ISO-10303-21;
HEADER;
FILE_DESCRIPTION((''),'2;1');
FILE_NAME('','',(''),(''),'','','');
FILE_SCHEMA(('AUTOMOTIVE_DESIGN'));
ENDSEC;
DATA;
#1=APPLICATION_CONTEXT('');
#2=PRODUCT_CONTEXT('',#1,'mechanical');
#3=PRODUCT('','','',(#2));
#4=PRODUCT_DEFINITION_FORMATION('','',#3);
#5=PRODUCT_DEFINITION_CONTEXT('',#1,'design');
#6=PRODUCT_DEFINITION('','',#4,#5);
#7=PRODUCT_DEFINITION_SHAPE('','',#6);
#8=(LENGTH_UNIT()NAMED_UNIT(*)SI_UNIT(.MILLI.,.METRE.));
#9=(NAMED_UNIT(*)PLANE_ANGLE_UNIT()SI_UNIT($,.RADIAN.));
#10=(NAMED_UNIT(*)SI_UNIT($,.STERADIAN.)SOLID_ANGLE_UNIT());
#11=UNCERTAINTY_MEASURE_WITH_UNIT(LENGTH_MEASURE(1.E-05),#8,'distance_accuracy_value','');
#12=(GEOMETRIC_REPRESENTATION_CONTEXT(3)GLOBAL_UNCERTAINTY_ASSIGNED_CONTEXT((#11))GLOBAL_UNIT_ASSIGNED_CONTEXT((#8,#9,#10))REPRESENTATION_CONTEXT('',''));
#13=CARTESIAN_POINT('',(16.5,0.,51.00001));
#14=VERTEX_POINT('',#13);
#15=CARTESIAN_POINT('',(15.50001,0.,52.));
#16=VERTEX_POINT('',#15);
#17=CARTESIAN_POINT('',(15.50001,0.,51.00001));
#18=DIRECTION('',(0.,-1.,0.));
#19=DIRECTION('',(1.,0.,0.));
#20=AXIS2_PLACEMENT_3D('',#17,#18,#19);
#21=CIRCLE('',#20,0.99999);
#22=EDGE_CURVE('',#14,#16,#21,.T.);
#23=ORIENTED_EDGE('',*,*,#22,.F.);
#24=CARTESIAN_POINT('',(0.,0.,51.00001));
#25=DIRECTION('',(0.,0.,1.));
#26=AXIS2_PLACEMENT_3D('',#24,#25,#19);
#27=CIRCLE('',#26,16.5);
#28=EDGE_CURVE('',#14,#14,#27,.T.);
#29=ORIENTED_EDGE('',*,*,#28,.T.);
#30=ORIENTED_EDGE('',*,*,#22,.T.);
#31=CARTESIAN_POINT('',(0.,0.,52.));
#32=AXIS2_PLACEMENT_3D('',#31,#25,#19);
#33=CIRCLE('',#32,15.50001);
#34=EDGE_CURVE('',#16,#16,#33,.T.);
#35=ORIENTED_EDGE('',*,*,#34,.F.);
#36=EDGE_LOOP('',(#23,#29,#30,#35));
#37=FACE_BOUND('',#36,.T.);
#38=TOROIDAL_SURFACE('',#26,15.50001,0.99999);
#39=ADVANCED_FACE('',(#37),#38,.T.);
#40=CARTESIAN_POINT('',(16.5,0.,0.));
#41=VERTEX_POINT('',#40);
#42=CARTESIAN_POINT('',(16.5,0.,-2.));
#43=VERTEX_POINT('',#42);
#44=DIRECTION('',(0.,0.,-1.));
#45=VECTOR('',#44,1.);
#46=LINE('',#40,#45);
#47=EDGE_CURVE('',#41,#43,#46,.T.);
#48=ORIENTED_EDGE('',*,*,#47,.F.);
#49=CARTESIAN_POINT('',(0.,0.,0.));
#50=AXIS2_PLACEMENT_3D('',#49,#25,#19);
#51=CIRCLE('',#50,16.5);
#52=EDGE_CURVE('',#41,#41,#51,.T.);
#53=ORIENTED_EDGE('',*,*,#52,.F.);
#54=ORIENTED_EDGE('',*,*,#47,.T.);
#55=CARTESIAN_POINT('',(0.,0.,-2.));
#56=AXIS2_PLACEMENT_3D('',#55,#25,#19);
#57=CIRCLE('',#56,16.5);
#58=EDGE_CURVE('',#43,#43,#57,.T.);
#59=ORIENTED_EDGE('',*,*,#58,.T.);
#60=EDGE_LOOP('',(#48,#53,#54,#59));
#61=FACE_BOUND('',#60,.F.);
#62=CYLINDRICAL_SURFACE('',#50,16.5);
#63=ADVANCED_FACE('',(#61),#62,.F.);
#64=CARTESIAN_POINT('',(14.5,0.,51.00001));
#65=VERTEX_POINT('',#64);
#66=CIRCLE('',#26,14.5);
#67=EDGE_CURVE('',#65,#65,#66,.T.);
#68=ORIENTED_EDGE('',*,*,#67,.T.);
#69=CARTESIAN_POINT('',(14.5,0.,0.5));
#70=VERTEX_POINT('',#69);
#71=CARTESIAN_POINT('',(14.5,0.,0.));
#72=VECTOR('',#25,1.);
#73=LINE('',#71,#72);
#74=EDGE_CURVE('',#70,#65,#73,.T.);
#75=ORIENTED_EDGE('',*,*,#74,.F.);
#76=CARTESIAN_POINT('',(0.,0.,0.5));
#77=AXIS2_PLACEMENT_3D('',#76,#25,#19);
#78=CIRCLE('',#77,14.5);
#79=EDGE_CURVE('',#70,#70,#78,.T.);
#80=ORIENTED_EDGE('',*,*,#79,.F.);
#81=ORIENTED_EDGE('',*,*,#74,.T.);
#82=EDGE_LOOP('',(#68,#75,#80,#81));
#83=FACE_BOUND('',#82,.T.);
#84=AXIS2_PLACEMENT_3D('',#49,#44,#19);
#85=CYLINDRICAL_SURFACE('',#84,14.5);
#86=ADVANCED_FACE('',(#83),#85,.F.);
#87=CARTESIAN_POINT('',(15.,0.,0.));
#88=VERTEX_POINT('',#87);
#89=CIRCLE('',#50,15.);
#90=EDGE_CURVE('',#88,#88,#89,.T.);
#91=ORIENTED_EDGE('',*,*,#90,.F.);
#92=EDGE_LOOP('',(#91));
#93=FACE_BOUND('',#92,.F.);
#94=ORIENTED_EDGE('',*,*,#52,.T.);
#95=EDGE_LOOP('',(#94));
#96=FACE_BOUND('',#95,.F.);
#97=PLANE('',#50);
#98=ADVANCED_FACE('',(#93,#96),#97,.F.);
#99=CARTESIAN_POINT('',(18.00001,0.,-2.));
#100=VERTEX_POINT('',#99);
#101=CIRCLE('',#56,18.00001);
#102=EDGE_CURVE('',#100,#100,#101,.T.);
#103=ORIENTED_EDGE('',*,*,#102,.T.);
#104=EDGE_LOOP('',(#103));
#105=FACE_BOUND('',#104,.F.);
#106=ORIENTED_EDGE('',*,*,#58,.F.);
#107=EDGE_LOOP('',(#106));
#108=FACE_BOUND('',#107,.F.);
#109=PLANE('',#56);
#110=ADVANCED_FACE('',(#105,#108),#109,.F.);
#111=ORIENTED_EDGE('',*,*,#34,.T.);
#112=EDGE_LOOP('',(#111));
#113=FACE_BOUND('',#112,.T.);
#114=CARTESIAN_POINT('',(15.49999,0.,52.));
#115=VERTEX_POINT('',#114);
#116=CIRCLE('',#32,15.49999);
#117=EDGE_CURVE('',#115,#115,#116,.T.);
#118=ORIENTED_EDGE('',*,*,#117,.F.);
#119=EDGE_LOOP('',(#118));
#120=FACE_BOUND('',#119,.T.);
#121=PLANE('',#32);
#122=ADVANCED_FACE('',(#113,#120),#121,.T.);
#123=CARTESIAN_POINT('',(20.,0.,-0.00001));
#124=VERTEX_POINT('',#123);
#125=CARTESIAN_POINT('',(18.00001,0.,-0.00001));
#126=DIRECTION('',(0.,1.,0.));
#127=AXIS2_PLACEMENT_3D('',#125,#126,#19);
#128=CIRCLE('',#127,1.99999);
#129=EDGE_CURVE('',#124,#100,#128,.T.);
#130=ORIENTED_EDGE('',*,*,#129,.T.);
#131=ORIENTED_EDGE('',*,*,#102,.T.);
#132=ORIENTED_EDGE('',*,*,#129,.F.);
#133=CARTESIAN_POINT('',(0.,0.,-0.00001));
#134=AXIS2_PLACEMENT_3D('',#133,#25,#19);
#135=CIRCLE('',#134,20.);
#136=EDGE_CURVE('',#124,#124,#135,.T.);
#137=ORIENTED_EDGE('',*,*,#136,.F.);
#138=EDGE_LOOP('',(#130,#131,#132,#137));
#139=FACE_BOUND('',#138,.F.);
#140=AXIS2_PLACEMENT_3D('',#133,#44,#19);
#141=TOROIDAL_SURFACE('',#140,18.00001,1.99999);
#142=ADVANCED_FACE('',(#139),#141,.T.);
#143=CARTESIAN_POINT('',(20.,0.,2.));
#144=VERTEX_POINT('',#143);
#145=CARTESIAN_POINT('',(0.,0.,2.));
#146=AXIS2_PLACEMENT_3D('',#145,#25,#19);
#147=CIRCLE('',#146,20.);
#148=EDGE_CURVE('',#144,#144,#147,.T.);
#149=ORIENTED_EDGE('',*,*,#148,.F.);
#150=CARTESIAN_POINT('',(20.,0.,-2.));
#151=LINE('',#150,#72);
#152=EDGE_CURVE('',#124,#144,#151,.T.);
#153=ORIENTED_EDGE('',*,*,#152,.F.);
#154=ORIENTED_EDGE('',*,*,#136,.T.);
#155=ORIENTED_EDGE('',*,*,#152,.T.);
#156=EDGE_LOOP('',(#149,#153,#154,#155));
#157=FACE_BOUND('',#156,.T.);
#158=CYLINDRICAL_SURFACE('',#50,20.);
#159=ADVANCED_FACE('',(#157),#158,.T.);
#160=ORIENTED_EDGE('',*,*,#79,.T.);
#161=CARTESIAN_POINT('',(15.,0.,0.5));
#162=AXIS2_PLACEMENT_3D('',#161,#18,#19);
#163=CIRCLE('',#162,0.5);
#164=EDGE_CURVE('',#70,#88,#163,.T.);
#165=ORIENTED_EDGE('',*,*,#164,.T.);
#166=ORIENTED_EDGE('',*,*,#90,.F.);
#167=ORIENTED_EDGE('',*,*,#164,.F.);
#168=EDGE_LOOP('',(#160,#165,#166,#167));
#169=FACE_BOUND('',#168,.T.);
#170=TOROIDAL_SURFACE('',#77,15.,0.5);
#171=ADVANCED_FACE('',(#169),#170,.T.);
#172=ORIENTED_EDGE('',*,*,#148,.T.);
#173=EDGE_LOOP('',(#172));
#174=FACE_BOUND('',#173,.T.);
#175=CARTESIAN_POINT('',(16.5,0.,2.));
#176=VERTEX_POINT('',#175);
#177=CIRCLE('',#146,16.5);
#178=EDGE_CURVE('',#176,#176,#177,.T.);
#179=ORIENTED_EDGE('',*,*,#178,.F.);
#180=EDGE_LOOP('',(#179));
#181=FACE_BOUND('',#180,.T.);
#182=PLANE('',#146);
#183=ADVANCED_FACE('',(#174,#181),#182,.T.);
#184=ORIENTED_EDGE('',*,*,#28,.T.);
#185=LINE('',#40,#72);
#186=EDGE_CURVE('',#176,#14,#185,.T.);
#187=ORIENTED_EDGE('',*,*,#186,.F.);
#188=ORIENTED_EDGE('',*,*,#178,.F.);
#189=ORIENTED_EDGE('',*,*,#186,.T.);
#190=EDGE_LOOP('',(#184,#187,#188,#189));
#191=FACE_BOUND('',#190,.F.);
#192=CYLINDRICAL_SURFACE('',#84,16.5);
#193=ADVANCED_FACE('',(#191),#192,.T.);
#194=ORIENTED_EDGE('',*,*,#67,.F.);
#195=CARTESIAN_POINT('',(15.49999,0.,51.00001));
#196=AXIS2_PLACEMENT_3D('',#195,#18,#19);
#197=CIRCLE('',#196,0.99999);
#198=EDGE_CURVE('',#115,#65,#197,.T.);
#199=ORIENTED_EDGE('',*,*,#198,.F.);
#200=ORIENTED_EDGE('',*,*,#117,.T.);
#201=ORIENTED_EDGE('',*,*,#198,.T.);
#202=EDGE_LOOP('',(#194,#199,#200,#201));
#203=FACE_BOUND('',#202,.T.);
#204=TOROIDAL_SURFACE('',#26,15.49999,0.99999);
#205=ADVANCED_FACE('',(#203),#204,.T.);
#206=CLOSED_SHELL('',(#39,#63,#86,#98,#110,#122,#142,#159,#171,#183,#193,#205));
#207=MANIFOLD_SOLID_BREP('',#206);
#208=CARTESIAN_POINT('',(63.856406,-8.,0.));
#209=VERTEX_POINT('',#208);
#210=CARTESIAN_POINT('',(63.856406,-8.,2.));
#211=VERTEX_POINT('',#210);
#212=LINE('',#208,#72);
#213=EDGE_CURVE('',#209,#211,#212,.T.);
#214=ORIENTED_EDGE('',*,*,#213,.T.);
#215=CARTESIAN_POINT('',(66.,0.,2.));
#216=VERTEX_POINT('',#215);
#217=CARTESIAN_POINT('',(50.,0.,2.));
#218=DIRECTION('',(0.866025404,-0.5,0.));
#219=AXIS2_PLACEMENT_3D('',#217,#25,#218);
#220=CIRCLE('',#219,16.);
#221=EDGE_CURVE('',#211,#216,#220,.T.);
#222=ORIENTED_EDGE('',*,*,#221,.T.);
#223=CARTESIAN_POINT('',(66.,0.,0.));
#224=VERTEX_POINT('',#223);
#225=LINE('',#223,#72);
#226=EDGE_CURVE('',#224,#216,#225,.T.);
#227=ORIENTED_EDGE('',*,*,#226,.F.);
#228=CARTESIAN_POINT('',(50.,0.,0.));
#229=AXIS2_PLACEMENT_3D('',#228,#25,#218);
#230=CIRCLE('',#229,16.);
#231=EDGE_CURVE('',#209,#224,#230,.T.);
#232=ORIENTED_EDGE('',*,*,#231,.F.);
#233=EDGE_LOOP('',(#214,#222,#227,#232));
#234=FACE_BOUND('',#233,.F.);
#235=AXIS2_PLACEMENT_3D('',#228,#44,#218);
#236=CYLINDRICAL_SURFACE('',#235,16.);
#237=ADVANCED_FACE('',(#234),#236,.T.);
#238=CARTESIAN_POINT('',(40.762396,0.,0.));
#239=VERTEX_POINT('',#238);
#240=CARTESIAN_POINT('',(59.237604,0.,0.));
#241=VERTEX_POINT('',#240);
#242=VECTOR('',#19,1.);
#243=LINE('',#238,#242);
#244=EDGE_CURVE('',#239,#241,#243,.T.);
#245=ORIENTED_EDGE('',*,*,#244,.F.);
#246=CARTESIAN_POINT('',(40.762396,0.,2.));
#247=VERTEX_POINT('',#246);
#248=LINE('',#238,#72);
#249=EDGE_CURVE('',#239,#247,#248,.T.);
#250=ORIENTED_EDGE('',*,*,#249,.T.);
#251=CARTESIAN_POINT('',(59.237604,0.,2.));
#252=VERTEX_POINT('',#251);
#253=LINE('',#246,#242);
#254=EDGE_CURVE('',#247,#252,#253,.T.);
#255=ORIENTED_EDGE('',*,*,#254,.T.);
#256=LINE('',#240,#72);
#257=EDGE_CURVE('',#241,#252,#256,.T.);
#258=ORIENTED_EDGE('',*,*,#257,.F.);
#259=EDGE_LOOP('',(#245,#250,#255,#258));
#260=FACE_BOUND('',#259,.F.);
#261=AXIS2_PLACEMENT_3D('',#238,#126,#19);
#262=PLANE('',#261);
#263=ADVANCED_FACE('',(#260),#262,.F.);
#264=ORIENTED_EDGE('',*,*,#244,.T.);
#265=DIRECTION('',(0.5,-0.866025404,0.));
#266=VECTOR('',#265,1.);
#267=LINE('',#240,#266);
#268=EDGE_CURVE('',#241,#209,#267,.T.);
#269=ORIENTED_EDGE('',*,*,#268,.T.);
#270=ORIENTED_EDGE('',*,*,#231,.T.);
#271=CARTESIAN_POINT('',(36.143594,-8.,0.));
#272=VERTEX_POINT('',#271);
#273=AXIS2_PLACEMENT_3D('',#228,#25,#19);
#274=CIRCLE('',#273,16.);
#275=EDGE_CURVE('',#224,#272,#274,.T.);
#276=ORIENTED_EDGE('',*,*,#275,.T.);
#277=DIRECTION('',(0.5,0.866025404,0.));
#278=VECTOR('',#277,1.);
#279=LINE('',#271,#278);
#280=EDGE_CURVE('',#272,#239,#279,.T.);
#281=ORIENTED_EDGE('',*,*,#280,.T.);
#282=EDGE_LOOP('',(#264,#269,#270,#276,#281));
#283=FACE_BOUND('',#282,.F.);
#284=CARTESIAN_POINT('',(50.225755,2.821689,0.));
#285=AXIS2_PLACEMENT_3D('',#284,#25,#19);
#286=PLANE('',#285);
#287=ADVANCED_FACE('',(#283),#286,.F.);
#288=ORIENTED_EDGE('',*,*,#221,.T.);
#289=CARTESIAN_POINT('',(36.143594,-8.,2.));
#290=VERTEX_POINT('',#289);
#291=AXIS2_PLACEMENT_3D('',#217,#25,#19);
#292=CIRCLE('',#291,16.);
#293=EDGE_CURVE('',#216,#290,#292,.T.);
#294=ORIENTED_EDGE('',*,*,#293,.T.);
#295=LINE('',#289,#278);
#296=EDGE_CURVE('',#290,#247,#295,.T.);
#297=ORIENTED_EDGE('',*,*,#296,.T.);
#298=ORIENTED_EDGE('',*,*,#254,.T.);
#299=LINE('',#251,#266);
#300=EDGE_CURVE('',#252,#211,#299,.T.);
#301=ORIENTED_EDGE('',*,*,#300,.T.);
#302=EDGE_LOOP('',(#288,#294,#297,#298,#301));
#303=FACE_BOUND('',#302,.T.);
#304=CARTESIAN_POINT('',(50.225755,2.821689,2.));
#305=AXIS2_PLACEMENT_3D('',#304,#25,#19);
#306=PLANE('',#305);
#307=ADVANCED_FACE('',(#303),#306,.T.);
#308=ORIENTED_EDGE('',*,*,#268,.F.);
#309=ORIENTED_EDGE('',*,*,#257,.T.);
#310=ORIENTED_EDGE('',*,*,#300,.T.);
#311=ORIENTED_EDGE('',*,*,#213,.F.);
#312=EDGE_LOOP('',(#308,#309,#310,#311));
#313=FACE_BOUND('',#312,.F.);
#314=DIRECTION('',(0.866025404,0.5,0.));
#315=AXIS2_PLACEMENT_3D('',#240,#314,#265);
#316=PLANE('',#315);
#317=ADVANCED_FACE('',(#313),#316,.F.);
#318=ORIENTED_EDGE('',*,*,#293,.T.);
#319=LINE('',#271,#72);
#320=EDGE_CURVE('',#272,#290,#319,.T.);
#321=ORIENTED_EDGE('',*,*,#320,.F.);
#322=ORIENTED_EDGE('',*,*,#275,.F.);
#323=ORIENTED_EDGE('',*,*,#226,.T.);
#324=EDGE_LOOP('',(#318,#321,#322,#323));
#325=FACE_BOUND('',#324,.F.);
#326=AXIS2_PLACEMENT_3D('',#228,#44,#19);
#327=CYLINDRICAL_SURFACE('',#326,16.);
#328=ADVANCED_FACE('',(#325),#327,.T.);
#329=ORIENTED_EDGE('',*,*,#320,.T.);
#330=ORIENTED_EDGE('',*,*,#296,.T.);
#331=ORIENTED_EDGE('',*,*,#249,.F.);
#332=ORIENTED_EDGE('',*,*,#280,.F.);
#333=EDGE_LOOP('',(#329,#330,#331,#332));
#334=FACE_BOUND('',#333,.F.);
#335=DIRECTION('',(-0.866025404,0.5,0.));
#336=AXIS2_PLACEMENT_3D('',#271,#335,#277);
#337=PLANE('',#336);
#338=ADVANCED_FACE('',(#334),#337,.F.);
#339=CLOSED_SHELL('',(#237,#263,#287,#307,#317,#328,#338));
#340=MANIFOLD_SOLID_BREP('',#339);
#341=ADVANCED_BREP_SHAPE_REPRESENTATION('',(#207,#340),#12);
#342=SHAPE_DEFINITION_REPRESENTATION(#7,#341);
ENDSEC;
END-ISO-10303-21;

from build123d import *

# Parameters (mm, degrees)
F0_R          = 16.5
F0_R_2        = 14.5
F1_DEPTH      = 52
F0_R_3        = 20
F2_DEPTH      = 2
F2_DEPTH_BACK = 2
F3_R          = 1.99999
F4_R          = 0.99999
F5_DEPTH      = 2
F6_R          = 0.5


# Not quite as in the source:
# - a fillet or chamfer is up to 0.001 mm smaller than in the source, because OpenCascade refuses the exact size


with BuildPart() as f1:
    # F0 (on Top) → F1 (new body)
    with BuildSketch(Plane.XY):
        Circle(F0_R)
        Circle(F0_R_2, mode=Mode.SUBTRACT)
    extrude(amount=F1_DEPTH)

    # F0 (on Top) → F2 (join, two sides)
    with BuildSketch(Plane.XY) as f2_sk:
        Circle(F0_R_3)
        Circle(F0_R, mode=Mode.SUBTRACT)
    extrude(amount=F2_DEPTH)
    extrude(f2_sk.sketch, amount=-F2_DEPTH_BACK)

    # F3 (radius 2 in the source; OpenCascade refuses exactly that, so slightly less here)
    f3_edges = [f1.edges().sort_by_distance(p)[0] for p in [
        (-20, 0, -2),
    ]]
    fillet(f3_edges, radius=F3_R)

    # F4 (radius 1 in the source; OpenCascade refuses exactly that, so slightly less here)
    f4_edges = [f1.edges().sort_by_distance(p)[0] for p in [
        (-16.5, 0, 52),
        (-14.5, 0, 52),
    ]]
    fillet(f4_edges, radius=F4_R)

    # F6
    f6_edges = [f1.edges().sort_by_distance(p)[0] for p in [
        (-14.5, 0, 0),
    ]]
    fillet(f6_edges, radius=F6_R)


with BuildPart() as f5:
    # F0 (on Top) → F5 (new body)
    with BuildSketch(Plane.XY):
        with BuildLine():
            ThreePointArc((63.8564064606, -8), (65.4548132206, -4.1411047216), (66, 0))
            ThreePointArc((66, 0), (45.8588952784, 15.4548132206), (36.1435935394, -8))
            Line((36.1435935394, -8), (40.762395693, 0))
            Line((40.762395693, 0), (59.237604307, 0))
            Line((59.237604307, 0), (63.8564064606, -8))
        make_face()
    extrude(amount=F5_DEPTH)


solid = Compound([f1.part, f5.part])
